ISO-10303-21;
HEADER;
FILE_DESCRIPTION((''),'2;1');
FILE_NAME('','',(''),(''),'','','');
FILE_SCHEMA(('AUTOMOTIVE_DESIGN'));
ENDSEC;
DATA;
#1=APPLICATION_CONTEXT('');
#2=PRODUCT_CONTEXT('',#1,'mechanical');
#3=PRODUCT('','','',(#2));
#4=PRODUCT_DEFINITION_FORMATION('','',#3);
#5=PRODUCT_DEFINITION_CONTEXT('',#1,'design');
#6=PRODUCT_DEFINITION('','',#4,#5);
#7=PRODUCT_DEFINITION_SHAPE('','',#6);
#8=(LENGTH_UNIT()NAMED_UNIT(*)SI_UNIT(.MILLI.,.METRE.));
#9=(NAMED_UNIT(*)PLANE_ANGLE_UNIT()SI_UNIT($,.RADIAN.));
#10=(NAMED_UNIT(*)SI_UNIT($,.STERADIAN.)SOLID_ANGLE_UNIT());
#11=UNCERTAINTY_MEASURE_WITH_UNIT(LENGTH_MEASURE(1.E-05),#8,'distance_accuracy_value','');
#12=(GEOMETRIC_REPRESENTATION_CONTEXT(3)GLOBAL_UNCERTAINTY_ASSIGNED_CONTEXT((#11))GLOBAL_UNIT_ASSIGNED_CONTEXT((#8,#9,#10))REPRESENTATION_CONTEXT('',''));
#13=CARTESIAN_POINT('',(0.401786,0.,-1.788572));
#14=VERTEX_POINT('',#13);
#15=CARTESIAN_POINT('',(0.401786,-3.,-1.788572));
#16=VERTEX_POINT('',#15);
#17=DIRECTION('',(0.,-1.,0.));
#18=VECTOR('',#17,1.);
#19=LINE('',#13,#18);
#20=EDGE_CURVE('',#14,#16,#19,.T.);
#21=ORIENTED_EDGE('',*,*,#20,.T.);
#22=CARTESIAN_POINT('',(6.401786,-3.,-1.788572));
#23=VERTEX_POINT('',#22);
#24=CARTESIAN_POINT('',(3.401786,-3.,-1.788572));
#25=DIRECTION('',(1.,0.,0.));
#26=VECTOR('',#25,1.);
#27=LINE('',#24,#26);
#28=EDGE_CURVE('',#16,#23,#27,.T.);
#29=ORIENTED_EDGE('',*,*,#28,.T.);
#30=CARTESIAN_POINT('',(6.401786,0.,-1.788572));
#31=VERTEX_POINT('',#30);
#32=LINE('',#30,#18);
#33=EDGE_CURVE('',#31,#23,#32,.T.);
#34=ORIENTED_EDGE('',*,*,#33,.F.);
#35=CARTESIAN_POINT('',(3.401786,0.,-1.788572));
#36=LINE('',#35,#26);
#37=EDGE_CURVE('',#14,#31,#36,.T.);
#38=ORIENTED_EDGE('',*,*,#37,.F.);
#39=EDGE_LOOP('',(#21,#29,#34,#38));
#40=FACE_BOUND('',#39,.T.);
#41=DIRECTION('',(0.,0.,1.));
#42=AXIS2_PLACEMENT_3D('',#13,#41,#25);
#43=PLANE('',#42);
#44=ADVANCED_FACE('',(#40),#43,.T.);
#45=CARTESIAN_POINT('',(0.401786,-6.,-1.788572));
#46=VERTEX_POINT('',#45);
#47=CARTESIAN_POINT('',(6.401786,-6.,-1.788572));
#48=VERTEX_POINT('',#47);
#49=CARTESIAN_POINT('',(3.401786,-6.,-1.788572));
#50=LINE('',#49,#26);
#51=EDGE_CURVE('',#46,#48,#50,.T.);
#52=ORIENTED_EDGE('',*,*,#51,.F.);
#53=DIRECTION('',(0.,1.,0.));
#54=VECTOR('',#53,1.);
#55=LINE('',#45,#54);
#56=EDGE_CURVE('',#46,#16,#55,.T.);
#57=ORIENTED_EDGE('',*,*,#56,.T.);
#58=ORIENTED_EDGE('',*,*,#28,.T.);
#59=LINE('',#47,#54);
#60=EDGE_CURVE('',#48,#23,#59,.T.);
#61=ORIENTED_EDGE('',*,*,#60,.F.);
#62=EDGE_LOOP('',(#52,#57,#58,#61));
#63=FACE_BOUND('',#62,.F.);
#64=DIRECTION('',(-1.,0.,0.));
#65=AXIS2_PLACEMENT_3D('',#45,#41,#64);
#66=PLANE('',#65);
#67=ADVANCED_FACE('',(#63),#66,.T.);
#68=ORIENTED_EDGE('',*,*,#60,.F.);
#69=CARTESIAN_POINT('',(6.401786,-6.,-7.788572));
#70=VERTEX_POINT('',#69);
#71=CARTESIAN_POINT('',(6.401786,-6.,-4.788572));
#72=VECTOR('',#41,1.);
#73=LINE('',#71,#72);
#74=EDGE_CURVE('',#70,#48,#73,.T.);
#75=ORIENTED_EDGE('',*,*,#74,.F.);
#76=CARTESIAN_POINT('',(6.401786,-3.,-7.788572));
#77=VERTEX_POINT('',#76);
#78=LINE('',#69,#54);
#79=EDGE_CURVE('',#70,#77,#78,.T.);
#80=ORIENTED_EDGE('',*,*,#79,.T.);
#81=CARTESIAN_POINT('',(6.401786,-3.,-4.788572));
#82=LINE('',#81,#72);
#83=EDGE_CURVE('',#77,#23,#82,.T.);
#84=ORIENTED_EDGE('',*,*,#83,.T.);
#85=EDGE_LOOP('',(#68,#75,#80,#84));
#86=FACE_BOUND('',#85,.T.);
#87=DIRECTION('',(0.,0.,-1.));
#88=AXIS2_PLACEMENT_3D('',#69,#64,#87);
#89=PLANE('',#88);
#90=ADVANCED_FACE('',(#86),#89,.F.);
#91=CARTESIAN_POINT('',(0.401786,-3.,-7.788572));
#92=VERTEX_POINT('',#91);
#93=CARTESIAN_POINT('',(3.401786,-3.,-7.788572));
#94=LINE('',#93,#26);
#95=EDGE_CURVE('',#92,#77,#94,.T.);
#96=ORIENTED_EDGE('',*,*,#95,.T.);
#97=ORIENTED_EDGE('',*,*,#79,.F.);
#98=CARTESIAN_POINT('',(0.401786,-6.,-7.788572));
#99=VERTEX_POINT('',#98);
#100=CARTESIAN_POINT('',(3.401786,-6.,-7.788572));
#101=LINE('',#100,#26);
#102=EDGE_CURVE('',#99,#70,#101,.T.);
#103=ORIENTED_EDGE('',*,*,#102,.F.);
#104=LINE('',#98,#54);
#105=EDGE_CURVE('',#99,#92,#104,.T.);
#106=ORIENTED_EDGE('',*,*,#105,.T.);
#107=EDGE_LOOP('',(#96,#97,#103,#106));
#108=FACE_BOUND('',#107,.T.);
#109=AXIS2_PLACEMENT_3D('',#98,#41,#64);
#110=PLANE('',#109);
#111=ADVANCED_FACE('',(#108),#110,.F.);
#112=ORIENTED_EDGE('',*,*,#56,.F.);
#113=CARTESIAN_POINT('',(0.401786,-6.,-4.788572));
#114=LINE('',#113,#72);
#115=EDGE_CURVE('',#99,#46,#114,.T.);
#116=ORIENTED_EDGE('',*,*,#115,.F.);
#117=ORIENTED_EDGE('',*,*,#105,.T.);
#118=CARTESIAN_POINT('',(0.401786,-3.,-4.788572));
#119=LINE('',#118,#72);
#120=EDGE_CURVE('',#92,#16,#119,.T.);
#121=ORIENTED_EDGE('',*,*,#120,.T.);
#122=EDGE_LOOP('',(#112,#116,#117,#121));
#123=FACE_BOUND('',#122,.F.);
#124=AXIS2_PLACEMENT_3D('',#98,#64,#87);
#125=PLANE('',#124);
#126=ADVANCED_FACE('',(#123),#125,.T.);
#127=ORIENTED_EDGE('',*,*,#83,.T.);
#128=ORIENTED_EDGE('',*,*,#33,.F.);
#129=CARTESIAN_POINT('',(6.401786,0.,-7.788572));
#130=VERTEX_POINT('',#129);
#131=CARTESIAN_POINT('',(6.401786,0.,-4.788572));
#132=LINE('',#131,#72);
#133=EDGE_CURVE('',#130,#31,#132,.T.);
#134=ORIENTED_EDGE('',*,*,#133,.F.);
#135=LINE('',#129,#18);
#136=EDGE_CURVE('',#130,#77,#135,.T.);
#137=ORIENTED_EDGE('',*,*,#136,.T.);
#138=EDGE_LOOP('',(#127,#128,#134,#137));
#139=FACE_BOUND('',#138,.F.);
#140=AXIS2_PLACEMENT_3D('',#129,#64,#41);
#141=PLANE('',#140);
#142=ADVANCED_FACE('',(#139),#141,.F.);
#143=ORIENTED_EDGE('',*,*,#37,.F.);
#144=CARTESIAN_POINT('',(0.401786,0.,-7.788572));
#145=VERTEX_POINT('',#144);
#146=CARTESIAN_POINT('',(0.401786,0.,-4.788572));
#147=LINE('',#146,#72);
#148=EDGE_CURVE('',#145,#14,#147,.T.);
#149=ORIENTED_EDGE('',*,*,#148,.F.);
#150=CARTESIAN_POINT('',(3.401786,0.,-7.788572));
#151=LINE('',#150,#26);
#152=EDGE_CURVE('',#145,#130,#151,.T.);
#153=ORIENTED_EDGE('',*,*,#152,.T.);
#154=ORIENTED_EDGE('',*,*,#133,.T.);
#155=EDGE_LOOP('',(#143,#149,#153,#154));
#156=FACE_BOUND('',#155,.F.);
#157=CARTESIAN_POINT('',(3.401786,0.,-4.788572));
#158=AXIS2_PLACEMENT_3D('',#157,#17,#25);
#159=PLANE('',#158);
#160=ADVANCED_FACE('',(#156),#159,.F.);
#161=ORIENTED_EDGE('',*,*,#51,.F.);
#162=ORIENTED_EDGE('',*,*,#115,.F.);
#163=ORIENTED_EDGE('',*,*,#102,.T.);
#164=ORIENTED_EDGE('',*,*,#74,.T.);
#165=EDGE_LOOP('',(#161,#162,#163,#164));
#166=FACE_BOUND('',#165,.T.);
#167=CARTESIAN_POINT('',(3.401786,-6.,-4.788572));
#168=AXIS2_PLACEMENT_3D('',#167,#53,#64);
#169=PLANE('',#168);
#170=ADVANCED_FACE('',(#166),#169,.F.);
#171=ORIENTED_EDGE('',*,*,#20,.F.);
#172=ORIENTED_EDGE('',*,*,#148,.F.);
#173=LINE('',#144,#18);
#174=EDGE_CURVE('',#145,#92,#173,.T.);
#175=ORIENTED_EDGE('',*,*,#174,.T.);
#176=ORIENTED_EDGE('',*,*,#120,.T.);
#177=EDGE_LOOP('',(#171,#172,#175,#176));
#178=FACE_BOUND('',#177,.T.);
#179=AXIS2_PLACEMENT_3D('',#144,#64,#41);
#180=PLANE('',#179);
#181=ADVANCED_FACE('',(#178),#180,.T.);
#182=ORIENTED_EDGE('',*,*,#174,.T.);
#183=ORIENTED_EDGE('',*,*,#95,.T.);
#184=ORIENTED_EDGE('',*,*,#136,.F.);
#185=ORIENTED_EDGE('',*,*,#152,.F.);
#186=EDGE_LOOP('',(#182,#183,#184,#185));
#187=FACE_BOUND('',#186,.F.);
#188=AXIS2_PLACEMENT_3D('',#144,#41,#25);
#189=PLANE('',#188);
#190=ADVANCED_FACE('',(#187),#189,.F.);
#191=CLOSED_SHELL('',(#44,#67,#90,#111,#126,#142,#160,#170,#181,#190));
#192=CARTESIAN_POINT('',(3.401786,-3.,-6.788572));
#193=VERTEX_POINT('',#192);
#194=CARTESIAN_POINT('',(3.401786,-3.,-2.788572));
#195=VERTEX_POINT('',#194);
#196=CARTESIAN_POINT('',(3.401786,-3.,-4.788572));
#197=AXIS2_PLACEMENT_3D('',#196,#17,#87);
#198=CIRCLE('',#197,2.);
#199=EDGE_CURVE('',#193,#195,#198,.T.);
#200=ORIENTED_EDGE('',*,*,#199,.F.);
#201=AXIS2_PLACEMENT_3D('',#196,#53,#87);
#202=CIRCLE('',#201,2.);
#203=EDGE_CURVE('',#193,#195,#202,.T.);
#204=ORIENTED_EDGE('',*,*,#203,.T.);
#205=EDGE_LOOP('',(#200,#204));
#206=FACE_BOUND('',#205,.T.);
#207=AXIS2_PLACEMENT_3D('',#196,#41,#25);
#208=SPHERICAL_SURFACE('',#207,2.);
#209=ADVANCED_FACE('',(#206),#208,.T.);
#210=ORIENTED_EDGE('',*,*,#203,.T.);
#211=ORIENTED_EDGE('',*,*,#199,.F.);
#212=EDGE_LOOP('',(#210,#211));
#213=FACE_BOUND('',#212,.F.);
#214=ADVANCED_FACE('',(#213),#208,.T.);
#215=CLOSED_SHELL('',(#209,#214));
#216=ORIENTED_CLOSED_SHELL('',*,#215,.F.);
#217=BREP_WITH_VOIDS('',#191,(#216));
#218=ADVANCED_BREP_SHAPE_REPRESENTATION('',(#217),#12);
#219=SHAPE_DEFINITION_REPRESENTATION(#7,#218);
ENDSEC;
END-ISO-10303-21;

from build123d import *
from build123d import SkipClean  # not in build123d's __all__

# Parameters (mm, degrees)
F0_W     = 6
F0_H     = 6
F1_DEPTH = 3
F3_ANGLE = 180


with BuildPart() as f1:
    # F0 (on Front) → F1 (new body)
    with BuildSketch(Plane.XZ):
        with Locations((3.4017860889, -4.7885723032)):
            Rectangle(F0_W, F0_H)
    extrude(amount=F1_DEPTH)

    # F2 (on face) → F3 (revolve, cut)
    with BuildSketch(Plane.XZ.offset(3)):
        with BuildLine():
            ThreePointArc((3.4017860889, -6.7885723032), (5.4017860889, -4.7885723032), (3.4017860889, -2.7885723032))
            Line((3.4017860889, -2.7885723032), (3.4017860889, -6.7885723032))
        make_face()
    revolve(axis=Axis((3.4017860889, -3, -4.7885723032), (0, 0, 1)), revolution_arc=F3_ANGLE, mode=Mode.SUBTRACT)

    # F4: F1 across face


with BuildPart() as f1_1:
    add(f1.part, clean=False)
    with SkipClean():  # cleaning this boolean's faces spoils the solid; the shape is the same uncleaned
        add(f1.part.mirror(Plane(origin=(3.4017860889, -3, -4.7885723032), x_dir=(1, 0, 0), z_dir=(0, -1, 0))), clean=False)


solid = f1_1.part
